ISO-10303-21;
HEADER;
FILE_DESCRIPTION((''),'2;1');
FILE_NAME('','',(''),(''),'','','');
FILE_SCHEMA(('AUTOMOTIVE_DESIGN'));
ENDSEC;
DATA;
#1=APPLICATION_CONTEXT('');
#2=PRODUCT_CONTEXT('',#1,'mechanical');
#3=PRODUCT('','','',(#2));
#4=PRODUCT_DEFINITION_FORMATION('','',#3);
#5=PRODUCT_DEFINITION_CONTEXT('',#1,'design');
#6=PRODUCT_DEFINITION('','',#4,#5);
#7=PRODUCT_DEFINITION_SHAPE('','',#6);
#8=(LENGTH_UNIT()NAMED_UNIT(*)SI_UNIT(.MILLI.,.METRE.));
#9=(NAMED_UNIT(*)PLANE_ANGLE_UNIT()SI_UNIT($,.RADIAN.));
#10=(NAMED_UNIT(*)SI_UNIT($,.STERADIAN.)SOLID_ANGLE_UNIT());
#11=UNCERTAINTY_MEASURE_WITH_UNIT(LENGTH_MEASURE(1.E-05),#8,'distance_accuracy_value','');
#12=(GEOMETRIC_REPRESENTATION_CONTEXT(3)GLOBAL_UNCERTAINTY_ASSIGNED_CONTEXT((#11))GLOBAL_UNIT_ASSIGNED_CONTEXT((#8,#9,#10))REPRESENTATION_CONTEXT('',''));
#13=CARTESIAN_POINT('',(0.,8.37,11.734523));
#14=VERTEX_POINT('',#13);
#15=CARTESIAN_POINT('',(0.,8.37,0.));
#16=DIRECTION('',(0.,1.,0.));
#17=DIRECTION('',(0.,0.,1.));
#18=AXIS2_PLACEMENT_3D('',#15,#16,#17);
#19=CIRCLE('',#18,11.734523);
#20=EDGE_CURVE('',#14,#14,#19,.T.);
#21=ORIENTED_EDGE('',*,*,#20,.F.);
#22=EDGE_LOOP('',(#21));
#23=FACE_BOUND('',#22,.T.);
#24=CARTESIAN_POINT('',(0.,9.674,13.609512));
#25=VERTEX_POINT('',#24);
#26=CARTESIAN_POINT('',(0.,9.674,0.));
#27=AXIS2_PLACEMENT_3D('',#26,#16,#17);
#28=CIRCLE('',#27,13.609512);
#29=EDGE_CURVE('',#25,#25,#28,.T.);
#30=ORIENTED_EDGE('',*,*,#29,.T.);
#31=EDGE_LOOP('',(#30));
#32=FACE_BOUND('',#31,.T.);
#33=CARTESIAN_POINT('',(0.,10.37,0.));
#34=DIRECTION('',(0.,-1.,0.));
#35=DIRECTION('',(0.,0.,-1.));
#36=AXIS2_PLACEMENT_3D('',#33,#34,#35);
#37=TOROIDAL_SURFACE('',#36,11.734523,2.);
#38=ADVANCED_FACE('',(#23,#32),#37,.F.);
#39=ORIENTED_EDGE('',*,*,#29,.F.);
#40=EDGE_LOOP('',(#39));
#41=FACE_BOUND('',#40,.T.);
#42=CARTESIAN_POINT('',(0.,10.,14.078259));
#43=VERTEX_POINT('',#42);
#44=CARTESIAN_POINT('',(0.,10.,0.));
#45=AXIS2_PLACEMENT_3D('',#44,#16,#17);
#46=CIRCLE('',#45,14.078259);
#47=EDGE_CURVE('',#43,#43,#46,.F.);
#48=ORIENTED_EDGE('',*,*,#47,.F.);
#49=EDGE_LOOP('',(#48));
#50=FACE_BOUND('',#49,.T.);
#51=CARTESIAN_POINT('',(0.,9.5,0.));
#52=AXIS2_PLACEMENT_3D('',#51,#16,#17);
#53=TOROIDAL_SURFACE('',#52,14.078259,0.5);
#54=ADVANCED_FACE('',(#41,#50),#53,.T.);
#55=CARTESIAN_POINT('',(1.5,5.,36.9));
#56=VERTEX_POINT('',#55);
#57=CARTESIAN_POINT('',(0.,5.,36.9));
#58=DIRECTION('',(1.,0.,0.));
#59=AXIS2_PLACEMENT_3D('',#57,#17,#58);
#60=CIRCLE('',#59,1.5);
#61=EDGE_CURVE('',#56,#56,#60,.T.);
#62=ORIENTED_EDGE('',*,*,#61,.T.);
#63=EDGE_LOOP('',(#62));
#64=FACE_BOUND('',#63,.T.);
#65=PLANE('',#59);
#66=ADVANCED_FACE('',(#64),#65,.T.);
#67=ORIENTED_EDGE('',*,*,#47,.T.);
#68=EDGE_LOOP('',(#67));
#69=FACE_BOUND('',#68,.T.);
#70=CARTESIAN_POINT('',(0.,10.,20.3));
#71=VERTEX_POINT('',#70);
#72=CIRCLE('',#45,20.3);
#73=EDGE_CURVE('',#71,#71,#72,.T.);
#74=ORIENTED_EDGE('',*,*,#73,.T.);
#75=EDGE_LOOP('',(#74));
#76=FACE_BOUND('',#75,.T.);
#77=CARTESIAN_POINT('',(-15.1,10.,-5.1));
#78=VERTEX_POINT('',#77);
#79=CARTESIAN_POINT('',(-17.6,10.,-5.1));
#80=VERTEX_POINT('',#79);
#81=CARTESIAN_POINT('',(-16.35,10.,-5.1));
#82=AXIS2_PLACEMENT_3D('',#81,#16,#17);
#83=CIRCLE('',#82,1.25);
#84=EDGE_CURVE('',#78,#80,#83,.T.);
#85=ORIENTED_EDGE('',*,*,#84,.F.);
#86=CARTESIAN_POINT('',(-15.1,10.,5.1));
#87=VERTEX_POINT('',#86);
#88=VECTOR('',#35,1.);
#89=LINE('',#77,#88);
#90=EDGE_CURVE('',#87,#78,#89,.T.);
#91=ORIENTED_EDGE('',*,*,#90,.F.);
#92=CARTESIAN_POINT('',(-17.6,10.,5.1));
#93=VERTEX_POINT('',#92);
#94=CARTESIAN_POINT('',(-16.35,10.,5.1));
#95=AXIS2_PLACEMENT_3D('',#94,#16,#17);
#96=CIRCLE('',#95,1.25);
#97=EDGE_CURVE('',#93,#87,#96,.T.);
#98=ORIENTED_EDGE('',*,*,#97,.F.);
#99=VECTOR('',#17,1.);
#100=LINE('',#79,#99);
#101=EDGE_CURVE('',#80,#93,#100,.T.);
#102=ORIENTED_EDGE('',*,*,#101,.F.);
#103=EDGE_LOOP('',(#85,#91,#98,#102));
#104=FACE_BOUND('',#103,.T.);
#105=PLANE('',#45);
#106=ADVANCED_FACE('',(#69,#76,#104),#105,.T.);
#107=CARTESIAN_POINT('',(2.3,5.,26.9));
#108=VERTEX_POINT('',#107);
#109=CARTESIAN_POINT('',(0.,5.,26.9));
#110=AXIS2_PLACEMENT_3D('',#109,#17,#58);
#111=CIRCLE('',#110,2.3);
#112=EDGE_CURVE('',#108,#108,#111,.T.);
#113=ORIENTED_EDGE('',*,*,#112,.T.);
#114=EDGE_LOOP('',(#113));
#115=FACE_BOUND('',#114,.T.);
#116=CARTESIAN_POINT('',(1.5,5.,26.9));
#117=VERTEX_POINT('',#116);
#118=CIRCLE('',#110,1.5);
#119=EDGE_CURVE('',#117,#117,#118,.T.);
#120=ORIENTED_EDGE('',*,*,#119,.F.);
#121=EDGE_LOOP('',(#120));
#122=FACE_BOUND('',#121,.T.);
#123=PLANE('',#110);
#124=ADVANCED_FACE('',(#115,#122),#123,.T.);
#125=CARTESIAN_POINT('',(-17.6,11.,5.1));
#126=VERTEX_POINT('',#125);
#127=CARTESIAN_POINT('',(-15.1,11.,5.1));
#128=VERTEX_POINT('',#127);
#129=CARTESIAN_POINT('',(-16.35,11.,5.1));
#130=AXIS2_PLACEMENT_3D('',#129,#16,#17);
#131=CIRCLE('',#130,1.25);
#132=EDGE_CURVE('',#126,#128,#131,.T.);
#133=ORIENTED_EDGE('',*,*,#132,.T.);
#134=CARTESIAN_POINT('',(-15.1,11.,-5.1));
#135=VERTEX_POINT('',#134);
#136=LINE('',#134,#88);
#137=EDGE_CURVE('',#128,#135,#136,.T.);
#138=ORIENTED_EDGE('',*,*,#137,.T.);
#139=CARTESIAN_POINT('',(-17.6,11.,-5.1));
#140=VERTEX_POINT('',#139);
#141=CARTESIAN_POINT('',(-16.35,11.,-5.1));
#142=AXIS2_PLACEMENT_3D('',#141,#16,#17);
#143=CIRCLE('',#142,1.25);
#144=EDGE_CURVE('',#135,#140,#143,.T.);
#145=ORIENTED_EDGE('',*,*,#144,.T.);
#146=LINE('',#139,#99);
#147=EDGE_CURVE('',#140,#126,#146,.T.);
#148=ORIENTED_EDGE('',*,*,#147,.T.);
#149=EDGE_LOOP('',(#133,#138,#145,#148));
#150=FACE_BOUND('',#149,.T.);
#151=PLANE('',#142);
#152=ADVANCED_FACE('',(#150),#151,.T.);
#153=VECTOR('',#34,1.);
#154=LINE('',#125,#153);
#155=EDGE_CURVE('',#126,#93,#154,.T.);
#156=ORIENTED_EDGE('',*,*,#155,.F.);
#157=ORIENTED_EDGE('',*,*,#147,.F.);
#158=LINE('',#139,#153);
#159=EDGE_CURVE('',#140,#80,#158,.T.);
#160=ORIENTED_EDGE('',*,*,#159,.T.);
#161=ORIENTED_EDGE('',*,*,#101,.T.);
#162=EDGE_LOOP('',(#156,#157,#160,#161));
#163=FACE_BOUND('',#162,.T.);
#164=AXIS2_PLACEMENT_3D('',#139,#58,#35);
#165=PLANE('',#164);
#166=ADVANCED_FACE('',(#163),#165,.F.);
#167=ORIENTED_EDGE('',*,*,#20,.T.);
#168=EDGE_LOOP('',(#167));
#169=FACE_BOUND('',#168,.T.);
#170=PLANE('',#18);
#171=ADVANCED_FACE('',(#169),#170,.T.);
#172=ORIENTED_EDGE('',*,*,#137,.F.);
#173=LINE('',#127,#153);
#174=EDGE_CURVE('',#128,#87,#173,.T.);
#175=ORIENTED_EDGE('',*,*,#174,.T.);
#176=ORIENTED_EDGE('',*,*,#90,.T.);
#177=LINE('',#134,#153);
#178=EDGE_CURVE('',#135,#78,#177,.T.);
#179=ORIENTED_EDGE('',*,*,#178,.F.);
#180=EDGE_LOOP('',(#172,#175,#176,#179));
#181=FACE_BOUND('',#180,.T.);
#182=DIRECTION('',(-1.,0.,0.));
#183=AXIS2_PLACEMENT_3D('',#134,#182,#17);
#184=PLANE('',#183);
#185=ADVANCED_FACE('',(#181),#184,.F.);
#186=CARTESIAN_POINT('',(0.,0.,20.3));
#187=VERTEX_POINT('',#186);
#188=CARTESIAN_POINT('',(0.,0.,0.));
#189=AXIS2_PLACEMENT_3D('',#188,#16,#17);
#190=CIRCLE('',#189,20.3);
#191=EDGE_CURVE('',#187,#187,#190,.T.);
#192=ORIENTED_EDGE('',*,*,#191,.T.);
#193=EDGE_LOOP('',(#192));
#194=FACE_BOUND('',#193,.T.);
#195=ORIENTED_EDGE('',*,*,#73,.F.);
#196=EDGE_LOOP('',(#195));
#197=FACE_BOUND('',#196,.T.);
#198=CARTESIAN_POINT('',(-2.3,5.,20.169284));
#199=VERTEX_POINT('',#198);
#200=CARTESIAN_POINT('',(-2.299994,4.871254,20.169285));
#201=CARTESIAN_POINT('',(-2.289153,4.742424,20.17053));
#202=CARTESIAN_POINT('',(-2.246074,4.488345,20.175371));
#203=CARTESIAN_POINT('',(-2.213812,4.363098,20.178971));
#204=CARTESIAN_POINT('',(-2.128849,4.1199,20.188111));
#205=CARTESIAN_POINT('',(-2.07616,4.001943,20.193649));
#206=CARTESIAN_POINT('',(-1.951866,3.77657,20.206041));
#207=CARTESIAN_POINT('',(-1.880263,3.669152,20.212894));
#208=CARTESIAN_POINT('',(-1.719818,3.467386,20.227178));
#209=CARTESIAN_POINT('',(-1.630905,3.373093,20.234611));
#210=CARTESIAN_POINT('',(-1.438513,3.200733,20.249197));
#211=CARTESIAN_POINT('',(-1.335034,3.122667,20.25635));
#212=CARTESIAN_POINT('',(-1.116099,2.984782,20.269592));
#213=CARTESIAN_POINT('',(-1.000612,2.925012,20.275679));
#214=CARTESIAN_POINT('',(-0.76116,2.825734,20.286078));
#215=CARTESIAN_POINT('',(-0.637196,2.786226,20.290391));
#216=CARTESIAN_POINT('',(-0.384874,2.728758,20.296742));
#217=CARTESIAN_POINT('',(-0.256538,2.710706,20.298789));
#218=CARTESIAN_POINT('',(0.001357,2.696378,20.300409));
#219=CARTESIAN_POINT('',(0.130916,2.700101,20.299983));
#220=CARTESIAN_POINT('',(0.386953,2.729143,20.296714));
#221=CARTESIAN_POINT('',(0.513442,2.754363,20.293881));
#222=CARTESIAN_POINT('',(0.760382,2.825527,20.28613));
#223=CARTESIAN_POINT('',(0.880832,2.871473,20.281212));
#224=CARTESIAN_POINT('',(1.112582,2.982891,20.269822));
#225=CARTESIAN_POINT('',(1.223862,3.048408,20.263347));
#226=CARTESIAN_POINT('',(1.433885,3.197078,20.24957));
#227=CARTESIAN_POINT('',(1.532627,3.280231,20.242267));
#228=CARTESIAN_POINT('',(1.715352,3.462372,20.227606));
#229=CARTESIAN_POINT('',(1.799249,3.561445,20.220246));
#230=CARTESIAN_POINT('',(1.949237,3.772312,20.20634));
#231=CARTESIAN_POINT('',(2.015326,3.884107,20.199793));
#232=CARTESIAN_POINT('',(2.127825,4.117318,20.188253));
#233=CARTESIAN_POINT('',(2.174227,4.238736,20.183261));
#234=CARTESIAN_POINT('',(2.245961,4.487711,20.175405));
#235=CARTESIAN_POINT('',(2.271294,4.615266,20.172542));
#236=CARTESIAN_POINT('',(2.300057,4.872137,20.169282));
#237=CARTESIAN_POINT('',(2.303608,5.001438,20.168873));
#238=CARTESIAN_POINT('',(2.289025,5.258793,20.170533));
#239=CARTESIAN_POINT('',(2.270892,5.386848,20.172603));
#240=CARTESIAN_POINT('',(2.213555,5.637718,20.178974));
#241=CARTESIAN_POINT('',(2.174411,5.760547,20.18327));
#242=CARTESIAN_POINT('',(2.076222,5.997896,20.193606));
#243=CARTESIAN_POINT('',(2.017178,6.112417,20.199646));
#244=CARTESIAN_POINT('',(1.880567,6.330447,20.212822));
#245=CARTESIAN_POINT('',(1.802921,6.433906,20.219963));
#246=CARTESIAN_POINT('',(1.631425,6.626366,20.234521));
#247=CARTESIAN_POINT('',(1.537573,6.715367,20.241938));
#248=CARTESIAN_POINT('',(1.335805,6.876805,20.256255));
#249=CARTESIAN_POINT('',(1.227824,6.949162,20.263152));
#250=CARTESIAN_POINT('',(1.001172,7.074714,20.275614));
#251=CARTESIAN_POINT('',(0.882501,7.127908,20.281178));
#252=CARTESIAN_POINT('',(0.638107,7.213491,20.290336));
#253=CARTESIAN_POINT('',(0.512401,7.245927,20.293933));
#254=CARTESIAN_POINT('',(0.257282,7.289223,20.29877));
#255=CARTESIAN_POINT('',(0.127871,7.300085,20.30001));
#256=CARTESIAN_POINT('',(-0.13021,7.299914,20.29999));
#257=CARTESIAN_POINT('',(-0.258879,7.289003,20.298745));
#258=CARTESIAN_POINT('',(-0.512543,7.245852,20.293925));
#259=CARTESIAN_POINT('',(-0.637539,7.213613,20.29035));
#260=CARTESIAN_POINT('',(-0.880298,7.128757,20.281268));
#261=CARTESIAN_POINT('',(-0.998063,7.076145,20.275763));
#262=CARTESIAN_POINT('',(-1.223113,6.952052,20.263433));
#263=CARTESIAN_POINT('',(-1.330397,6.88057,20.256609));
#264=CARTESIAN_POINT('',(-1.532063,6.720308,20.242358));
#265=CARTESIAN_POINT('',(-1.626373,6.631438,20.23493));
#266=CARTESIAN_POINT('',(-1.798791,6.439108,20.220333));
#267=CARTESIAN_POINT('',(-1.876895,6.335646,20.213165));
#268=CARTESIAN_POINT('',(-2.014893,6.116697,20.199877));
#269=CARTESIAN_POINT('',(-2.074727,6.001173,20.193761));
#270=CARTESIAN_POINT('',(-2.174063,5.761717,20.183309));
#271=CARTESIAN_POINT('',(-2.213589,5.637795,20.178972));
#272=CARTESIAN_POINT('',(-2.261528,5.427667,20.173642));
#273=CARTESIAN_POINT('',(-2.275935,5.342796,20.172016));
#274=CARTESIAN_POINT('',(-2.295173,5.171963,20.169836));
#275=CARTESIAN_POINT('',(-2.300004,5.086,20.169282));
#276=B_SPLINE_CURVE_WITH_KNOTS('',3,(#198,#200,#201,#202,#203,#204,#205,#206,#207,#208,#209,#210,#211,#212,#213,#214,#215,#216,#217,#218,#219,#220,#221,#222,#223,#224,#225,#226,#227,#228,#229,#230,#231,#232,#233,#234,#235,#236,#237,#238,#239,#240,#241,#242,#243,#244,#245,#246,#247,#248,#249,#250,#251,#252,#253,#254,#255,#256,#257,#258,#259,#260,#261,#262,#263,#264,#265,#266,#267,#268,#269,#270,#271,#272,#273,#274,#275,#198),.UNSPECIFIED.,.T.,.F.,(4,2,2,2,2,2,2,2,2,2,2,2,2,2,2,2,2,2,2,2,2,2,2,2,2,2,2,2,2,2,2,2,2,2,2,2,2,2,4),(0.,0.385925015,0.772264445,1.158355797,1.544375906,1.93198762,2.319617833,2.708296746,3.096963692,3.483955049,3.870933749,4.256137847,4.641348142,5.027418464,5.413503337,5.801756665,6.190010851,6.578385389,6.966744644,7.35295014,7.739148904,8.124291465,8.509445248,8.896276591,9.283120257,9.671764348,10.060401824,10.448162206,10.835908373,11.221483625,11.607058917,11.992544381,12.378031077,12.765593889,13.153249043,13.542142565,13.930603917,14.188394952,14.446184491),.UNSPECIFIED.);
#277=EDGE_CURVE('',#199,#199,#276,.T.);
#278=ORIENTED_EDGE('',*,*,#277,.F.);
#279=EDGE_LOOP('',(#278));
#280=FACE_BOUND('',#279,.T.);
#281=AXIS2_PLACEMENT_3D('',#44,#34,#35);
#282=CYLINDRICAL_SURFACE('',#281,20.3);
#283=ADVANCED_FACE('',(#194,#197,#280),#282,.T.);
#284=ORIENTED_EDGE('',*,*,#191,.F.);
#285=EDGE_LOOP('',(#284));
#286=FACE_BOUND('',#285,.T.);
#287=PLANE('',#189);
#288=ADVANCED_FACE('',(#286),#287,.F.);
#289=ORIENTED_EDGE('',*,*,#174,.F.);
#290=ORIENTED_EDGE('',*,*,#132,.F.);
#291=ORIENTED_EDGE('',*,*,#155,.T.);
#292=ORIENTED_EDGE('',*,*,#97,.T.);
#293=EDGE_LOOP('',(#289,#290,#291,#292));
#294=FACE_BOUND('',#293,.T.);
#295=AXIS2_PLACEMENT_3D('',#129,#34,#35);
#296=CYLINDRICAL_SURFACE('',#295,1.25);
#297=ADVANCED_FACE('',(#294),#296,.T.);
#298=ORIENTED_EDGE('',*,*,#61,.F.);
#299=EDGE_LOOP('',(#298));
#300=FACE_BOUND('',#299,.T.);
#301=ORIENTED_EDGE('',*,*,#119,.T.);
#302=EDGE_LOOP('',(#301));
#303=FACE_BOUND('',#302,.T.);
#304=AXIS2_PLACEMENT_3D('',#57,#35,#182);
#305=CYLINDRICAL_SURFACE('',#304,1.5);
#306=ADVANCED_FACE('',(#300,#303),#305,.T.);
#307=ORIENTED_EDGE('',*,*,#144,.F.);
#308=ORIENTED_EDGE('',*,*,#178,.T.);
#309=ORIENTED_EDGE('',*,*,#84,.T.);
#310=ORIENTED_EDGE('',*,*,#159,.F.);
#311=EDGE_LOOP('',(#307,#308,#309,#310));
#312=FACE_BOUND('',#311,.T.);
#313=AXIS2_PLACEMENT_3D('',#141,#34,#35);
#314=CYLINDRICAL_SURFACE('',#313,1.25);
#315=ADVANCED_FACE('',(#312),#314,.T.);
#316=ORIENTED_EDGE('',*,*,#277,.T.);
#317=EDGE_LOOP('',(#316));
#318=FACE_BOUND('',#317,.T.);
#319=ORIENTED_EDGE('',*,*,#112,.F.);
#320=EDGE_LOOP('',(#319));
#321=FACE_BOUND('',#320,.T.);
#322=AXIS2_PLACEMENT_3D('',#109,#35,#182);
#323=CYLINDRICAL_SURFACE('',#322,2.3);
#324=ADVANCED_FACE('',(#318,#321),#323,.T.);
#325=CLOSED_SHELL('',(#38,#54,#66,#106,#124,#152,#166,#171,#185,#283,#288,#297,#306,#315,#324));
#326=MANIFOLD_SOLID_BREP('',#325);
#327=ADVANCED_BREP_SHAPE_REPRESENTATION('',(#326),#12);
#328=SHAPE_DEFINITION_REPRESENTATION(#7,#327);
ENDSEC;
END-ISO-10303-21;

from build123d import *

# Parameters (mm, degrees)
SKETCH_1_R          = 20.3
EXTRUDE_1_DEPTH     = 10
SKETCH_2_R          = 2.3
EXTRUDE_2_DEPTH     = 26.9
SKETCH_3_R          = 1.5
EXTRUDE_3_DEPTH     = 10
EXTRUDE_4_DEPTH     = 1
SKETCH_5_R          = 13.7
CUT_EXTRUDE_1_DEPTH = 1.63
FILLET_1_R          = 2
FILLET_2_R          = 0.5


with BuildPart() as part:
    # 草图1 → 凸台-拉伸1 (new body)
    with BuildSketch(Plane(origin=(0, 0, 0), x_dir=(1, 0, 0), z_dir=(0, 1, 0))):
        with Locations(Location((0, 0, 0), (0, 0, 270))):
            Circle(SKETCH_1_R)
    extrude(amount=EXTRUDE_1_DEPTH)

    # 草图2 → 凸台-拉伸2 (add)
    with BuildSketch(Plane.XY):
        with Locations(Location((0, 5, 0), (0, 0, 180))):
            Circle(SKETCH_2_R)
    extrude(amount=EXTRUDE_2_DEPTH)

    # 草图3 → 凸台-拉伸3 (add)
    with BuildSketch(Plane.XY.offset(26.9)):
        with Locations((0, 5)):
            Circle(SKETCH_3_R)
    extrude(amount=EXTRUDE_3_DEPTH)

    # 草图4 → 凸台-拉伸4 (add)
    with BuildSketch(Plane(origin=(0, 10, 0), x_dir=(1, 0, 0), z_dir=(0, 1, 0))):
        with BuildLine():
            Line((-15.1, 5.1), (-15.1, -5.1))
            ThreePointArc((-15.1, -5.1), (-16.35, -6.35), (-17.6, -5.1))
            Line((-17.6, -5.1), (-17.6, 5.1))
            ThreePointArc((-17.6, 5.1), (-16.35, 6.35), (-15.1, 5.1))
        make_face()
    extrude(amount=EXTRUDE_4_DEPTH)

    # 草图5 → 切除-拉伸1 (cut)
    with BuildSketch(Plane(origin=(0, 10, 0), x_dir=(1, 0, 0), z_dir=(0, 1, 0))):
        with Locations(Location((0, 0, 0), (0, 0, 270))):
            Circle(SKETCH_5_R)
    extrude(amount=-CUT_EXTRUDE_1_DEPTH, mode=Mode.SUBTRACT)

    # 圆角1
    # the kernel refuses this fillet: 2 mm, written as the material it adds along each edge
    with BuildSketch(Plane(origin=(0, 8.37, 0), x_dir=(0, 0, 1), z_dir=(-1, 0, 0))) as fillet_1_piece_1:
        with BuildLine():
            CenterArc((11.734522959, 2), FILLET_1_R, 270, 79.338867602)
            Line((11.734522959, 0), (11.734522959, -0.04))
            Line((11.734522959, -0.04), (13.7, -0.04))
            Line((13.7, -0.04), (13.74, 0))
            ThreePointArc((13.74, 0), (13.74, 0.815), (13.739309541, 1.6226))
            Line((13.739309541, 1.6226), (13.7, 1.63))
        make_face()
    revolve(axis=Axis((0, 8.37, 0), (0, 1, 0)))

    # 圆角2
    fillet_2_edges = [part.edges().sort_by_distance(p)[0] for p in [
        (0, 10, -13.7),
    ]]
    fillet(fillet_2_edges, radius=FILLET_2_R)


solid = part.part
